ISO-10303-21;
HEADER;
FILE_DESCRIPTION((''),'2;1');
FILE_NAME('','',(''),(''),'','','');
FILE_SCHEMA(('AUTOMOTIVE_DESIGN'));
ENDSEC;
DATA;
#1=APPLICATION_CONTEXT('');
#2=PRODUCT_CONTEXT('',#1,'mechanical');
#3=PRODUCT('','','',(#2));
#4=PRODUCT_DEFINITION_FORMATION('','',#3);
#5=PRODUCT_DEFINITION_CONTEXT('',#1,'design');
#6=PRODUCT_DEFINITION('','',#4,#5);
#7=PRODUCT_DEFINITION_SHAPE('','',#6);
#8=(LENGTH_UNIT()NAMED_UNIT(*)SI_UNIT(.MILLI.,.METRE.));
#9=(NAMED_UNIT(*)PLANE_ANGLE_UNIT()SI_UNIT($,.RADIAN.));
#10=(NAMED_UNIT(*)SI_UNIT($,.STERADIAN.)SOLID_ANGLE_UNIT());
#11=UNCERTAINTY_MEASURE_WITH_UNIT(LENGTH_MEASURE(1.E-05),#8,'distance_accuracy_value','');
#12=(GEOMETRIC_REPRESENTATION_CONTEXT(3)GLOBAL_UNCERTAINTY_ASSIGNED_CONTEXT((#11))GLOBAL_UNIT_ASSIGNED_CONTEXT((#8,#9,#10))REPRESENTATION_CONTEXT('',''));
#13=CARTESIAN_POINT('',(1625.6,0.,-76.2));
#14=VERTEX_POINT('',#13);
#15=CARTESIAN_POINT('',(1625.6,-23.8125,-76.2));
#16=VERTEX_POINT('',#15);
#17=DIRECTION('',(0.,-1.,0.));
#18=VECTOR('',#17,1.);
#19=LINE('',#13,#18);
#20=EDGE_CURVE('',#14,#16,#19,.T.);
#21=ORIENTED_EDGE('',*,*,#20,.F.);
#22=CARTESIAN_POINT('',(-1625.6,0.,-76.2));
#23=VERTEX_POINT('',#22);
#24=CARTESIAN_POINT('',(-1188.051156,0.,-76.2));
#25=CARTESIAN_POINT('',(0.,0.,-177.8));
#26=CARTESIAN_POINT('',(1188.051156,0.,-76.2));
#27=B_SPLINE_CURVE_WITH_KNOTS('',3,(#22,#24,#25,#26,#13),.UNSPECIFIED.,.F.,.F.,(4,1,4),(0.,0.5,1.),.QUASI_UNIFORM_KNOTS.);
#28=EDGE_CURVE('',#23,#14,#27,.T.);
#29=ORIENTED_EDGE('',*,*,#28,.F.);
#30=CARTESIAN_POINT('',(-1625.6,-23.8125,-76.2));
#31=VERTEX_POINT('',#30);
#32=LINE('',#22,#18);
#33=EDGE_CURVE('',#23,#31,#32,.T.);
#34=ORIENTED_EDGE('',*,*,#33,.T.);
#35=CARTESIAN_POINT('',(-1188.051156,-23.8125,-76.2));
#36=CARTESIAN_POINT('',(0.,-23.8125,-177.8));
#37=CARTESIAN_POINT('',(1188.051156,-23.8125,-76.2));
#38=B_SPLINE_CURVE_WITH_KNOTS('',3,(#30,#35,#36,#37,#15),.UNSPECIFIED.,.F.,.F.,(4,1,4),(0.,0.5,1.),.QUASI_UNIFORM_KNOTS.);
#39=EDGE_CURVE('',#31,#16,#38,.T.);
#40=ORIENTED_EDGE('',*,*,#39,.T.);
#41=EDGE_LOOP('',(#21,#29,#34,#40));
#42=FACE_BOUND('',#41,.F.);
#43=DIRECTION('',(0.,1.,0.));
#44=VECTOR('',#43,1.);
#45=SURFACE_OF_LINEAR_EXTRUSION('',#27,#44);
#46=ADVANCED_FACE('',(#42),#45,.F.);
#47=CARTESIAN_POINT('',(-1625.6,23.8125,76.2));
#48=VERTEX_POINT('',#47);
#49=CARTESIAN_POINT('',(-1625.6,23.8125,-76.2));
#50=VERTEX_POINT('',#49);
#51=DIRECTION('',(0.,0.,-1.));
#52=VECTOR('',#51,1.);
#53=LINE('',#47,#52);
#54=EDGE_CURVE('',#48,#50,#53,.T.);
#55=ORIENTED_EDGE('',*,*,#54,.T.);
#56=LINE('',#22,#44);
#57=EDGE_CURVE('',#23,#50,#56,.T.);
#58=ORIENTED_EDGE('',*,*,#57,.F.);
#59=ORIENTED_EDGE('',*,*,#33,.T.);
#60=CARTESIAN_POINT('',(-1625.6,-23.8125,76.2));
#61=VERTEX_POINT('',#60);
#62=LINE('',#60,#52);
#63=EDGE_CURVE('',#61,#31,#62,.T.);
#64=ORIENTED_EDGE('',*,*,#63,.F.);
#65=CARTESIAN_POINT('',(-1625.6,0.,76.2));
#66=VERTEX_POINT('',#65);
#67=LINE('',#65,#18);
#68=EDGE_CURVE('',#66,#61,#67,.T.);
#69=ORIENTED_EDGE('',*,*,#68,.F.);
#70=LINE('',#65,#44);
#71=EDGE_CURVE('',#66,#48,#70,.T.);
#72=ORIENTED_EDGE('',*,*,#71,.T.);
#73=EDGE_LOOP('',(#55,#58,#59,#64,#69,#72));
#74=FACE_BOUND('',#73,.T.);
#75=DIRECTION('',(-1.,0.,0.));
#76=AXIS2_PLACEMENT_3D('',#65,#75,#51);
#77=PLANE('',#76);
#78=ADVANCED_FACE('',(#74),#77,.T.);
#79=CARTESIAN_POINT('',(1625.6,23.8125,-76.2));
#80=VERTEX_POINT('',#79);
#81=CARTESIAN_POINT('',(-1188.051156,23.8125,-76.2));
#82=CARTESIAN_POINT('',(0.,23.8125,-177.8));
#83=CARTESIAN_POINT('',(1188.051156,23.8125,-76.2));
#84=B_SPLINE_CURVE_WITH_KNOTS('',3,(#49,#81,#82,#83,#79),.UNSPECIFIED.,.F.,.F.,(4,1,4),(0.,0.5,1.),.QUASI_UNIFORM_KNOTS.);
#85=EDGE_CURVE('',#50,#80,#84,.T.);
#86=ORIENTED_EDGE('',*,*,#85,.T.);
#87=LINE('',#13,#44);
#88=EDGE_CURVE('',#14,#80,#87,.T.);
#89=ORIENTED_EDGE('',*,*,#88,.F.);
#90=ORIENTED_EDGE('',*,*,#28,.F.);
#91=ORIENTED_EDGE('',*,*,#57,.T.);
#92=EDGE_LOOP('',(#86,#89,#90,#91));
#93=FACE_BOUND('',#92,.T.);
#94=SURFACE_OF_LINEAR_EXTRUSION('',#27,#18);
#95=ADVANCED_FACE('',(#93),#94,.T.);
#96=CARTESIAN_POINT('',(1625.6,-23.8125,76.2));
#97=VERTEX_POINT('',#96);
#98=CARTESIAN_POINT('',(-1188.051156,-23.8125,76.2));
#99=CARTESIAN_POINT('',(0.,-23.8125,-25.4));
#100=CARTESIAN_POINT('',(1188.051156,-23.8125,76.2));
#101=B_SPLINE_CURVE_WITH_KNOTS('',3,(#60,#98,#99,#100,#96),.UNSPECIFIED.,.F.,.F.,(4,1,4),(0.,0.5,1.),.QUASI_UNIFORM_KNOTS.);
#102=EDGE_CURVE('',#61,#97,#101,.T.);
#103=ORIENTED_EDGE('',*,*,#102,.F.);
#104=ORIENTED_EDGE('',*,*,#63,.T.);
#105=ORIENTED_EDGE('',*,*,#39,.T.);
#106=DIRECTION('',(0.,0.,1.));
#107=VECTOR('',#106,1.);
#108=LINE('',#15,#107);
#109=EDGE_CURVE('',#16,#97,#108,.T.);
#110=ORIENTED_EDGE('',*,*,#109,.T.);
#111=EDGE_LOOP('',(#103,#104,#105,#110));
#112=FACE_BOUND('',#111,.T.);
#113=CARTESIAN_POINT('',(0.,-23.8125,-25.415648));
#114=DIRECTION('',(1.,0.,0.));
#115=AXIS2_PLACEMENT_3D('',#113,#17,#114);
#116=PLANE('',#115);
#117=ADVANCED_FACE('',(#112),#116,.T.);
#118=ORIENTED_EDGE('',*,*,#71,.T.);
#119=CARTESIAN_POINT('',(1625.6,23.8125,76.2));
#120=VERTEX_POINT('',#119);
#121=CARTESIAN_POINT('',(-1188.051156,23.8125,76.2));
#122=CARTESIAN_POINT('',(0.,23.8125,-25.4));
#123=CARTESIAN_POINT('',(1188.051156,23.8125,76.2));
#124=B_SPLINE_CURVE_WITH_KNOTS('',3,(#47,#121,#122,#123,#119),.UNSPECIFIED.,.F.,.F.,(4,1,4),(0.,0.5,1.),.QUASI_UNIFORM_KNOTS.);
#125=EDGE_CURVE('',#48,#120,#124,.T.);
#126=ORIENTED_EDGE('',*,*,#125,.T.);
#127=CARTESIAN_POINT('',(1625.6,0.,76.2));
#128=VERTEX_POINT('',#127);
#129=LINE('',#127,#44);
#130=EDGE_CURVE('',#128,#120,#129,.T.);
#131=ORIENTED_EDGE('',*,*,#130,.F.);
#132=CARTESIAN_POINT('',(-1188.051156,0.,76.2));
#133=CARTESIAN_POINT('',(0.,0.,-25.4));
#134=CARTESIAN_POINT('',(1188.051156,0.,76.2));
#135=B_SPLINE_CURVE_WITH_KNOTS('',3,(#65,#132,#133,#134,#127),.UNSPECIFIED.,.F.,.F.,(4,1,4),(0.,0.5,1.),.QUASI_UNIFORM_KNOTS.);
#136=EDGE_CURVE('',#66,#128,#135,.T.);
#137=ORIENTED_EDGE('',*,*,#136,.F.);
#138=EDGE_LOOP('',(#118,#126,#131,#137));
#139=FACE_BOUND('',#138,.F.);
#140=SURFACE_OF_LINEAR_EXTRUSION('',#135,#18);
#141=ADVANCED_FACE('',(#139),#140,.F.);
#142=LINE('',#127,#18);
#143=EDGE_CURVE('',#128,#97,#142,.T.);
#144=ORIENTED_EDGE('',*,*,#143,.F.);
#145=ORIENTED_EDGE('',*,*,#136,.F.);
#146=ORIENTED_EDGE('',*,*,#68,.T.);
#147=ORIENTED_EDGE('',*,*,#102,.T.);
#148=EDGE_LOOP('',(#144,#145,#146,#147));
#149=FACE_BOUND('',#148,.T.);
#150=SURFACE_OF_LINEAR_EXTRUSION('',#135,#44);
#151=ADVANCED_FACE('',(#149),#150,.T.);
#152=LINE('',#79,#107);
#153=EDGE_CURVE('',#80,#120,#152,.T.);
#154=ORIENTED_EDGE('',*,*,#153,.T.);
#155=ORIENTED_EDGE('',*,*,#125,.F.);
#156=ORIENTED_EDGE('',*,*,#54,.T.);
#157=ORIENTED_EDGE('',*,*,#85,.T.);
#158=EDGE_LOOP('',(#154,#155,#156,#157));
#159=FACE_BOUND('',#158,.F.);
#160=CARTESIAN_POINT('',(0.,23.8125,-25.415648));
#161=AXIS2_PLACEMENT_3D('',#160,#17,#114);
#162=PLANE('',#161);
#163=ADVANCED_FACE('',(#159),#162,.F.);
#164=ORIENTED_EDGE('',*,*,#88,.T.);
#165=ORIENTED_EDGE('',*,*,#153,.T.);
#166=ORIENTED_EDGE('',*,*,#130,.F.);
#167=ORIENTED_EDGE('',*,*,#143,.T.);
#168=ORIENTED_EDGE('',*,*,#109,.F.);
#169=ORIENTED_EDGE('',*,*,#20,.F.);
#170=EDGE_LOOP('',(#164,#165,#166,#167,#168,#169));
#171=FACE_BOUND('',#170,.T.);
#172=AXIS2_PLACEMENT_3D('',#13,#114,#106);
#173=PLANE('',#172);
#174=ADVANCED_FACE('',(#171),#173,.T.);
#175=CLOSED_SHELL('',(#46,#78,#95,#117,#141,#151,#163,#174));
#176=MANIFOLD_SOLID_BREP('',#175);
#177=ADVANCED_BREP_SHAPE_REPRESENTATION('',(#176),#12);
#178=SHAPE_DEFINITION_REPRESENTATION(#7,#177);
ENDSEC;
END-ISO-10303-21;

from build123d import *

# Parameters (mm, degrees)
F2_DEPTH = 23.8125


# Not quite as in the source:
# - a variable given as a bare number and used for a length is read in inches; the dataset says mm whatever the document's units were


with BuildPart() as f2:
    # F1 (on Front) → F2 (new body, symmetric)
    with BuildSketch(Plane.XZ):
        with BuildLine():
            Line((-1625.6, 76.2), (-1625.6, -76.2))
            add(Edge.make_bspline(
                [(-1625.6, -76.2), (-1188.0511561093, -76.2), (0, -177.8), (1188.0511561093, -76.2), (1625.6, -76.2)],
                knots=[0, 0, 0, 0, 0.5, 1, 1, 1, 1], degree=3))
            Line((1625.6, -76.2), (1625.6, 76.2))
            add(Edge.make_bspline(
                [(-1625.6, 76.2), (-1188.0511561093, 76.2), (0, -25.4), (1188.0511561093, 76.2), (1625.6, 76.2)],
                knots=[0, 0, 0, 0, 0.5, 1, 1, 1, 1], degree=3))
        make_face()
    extrude(amount=F2_DEPTH, both=True)


solid = f2.part
